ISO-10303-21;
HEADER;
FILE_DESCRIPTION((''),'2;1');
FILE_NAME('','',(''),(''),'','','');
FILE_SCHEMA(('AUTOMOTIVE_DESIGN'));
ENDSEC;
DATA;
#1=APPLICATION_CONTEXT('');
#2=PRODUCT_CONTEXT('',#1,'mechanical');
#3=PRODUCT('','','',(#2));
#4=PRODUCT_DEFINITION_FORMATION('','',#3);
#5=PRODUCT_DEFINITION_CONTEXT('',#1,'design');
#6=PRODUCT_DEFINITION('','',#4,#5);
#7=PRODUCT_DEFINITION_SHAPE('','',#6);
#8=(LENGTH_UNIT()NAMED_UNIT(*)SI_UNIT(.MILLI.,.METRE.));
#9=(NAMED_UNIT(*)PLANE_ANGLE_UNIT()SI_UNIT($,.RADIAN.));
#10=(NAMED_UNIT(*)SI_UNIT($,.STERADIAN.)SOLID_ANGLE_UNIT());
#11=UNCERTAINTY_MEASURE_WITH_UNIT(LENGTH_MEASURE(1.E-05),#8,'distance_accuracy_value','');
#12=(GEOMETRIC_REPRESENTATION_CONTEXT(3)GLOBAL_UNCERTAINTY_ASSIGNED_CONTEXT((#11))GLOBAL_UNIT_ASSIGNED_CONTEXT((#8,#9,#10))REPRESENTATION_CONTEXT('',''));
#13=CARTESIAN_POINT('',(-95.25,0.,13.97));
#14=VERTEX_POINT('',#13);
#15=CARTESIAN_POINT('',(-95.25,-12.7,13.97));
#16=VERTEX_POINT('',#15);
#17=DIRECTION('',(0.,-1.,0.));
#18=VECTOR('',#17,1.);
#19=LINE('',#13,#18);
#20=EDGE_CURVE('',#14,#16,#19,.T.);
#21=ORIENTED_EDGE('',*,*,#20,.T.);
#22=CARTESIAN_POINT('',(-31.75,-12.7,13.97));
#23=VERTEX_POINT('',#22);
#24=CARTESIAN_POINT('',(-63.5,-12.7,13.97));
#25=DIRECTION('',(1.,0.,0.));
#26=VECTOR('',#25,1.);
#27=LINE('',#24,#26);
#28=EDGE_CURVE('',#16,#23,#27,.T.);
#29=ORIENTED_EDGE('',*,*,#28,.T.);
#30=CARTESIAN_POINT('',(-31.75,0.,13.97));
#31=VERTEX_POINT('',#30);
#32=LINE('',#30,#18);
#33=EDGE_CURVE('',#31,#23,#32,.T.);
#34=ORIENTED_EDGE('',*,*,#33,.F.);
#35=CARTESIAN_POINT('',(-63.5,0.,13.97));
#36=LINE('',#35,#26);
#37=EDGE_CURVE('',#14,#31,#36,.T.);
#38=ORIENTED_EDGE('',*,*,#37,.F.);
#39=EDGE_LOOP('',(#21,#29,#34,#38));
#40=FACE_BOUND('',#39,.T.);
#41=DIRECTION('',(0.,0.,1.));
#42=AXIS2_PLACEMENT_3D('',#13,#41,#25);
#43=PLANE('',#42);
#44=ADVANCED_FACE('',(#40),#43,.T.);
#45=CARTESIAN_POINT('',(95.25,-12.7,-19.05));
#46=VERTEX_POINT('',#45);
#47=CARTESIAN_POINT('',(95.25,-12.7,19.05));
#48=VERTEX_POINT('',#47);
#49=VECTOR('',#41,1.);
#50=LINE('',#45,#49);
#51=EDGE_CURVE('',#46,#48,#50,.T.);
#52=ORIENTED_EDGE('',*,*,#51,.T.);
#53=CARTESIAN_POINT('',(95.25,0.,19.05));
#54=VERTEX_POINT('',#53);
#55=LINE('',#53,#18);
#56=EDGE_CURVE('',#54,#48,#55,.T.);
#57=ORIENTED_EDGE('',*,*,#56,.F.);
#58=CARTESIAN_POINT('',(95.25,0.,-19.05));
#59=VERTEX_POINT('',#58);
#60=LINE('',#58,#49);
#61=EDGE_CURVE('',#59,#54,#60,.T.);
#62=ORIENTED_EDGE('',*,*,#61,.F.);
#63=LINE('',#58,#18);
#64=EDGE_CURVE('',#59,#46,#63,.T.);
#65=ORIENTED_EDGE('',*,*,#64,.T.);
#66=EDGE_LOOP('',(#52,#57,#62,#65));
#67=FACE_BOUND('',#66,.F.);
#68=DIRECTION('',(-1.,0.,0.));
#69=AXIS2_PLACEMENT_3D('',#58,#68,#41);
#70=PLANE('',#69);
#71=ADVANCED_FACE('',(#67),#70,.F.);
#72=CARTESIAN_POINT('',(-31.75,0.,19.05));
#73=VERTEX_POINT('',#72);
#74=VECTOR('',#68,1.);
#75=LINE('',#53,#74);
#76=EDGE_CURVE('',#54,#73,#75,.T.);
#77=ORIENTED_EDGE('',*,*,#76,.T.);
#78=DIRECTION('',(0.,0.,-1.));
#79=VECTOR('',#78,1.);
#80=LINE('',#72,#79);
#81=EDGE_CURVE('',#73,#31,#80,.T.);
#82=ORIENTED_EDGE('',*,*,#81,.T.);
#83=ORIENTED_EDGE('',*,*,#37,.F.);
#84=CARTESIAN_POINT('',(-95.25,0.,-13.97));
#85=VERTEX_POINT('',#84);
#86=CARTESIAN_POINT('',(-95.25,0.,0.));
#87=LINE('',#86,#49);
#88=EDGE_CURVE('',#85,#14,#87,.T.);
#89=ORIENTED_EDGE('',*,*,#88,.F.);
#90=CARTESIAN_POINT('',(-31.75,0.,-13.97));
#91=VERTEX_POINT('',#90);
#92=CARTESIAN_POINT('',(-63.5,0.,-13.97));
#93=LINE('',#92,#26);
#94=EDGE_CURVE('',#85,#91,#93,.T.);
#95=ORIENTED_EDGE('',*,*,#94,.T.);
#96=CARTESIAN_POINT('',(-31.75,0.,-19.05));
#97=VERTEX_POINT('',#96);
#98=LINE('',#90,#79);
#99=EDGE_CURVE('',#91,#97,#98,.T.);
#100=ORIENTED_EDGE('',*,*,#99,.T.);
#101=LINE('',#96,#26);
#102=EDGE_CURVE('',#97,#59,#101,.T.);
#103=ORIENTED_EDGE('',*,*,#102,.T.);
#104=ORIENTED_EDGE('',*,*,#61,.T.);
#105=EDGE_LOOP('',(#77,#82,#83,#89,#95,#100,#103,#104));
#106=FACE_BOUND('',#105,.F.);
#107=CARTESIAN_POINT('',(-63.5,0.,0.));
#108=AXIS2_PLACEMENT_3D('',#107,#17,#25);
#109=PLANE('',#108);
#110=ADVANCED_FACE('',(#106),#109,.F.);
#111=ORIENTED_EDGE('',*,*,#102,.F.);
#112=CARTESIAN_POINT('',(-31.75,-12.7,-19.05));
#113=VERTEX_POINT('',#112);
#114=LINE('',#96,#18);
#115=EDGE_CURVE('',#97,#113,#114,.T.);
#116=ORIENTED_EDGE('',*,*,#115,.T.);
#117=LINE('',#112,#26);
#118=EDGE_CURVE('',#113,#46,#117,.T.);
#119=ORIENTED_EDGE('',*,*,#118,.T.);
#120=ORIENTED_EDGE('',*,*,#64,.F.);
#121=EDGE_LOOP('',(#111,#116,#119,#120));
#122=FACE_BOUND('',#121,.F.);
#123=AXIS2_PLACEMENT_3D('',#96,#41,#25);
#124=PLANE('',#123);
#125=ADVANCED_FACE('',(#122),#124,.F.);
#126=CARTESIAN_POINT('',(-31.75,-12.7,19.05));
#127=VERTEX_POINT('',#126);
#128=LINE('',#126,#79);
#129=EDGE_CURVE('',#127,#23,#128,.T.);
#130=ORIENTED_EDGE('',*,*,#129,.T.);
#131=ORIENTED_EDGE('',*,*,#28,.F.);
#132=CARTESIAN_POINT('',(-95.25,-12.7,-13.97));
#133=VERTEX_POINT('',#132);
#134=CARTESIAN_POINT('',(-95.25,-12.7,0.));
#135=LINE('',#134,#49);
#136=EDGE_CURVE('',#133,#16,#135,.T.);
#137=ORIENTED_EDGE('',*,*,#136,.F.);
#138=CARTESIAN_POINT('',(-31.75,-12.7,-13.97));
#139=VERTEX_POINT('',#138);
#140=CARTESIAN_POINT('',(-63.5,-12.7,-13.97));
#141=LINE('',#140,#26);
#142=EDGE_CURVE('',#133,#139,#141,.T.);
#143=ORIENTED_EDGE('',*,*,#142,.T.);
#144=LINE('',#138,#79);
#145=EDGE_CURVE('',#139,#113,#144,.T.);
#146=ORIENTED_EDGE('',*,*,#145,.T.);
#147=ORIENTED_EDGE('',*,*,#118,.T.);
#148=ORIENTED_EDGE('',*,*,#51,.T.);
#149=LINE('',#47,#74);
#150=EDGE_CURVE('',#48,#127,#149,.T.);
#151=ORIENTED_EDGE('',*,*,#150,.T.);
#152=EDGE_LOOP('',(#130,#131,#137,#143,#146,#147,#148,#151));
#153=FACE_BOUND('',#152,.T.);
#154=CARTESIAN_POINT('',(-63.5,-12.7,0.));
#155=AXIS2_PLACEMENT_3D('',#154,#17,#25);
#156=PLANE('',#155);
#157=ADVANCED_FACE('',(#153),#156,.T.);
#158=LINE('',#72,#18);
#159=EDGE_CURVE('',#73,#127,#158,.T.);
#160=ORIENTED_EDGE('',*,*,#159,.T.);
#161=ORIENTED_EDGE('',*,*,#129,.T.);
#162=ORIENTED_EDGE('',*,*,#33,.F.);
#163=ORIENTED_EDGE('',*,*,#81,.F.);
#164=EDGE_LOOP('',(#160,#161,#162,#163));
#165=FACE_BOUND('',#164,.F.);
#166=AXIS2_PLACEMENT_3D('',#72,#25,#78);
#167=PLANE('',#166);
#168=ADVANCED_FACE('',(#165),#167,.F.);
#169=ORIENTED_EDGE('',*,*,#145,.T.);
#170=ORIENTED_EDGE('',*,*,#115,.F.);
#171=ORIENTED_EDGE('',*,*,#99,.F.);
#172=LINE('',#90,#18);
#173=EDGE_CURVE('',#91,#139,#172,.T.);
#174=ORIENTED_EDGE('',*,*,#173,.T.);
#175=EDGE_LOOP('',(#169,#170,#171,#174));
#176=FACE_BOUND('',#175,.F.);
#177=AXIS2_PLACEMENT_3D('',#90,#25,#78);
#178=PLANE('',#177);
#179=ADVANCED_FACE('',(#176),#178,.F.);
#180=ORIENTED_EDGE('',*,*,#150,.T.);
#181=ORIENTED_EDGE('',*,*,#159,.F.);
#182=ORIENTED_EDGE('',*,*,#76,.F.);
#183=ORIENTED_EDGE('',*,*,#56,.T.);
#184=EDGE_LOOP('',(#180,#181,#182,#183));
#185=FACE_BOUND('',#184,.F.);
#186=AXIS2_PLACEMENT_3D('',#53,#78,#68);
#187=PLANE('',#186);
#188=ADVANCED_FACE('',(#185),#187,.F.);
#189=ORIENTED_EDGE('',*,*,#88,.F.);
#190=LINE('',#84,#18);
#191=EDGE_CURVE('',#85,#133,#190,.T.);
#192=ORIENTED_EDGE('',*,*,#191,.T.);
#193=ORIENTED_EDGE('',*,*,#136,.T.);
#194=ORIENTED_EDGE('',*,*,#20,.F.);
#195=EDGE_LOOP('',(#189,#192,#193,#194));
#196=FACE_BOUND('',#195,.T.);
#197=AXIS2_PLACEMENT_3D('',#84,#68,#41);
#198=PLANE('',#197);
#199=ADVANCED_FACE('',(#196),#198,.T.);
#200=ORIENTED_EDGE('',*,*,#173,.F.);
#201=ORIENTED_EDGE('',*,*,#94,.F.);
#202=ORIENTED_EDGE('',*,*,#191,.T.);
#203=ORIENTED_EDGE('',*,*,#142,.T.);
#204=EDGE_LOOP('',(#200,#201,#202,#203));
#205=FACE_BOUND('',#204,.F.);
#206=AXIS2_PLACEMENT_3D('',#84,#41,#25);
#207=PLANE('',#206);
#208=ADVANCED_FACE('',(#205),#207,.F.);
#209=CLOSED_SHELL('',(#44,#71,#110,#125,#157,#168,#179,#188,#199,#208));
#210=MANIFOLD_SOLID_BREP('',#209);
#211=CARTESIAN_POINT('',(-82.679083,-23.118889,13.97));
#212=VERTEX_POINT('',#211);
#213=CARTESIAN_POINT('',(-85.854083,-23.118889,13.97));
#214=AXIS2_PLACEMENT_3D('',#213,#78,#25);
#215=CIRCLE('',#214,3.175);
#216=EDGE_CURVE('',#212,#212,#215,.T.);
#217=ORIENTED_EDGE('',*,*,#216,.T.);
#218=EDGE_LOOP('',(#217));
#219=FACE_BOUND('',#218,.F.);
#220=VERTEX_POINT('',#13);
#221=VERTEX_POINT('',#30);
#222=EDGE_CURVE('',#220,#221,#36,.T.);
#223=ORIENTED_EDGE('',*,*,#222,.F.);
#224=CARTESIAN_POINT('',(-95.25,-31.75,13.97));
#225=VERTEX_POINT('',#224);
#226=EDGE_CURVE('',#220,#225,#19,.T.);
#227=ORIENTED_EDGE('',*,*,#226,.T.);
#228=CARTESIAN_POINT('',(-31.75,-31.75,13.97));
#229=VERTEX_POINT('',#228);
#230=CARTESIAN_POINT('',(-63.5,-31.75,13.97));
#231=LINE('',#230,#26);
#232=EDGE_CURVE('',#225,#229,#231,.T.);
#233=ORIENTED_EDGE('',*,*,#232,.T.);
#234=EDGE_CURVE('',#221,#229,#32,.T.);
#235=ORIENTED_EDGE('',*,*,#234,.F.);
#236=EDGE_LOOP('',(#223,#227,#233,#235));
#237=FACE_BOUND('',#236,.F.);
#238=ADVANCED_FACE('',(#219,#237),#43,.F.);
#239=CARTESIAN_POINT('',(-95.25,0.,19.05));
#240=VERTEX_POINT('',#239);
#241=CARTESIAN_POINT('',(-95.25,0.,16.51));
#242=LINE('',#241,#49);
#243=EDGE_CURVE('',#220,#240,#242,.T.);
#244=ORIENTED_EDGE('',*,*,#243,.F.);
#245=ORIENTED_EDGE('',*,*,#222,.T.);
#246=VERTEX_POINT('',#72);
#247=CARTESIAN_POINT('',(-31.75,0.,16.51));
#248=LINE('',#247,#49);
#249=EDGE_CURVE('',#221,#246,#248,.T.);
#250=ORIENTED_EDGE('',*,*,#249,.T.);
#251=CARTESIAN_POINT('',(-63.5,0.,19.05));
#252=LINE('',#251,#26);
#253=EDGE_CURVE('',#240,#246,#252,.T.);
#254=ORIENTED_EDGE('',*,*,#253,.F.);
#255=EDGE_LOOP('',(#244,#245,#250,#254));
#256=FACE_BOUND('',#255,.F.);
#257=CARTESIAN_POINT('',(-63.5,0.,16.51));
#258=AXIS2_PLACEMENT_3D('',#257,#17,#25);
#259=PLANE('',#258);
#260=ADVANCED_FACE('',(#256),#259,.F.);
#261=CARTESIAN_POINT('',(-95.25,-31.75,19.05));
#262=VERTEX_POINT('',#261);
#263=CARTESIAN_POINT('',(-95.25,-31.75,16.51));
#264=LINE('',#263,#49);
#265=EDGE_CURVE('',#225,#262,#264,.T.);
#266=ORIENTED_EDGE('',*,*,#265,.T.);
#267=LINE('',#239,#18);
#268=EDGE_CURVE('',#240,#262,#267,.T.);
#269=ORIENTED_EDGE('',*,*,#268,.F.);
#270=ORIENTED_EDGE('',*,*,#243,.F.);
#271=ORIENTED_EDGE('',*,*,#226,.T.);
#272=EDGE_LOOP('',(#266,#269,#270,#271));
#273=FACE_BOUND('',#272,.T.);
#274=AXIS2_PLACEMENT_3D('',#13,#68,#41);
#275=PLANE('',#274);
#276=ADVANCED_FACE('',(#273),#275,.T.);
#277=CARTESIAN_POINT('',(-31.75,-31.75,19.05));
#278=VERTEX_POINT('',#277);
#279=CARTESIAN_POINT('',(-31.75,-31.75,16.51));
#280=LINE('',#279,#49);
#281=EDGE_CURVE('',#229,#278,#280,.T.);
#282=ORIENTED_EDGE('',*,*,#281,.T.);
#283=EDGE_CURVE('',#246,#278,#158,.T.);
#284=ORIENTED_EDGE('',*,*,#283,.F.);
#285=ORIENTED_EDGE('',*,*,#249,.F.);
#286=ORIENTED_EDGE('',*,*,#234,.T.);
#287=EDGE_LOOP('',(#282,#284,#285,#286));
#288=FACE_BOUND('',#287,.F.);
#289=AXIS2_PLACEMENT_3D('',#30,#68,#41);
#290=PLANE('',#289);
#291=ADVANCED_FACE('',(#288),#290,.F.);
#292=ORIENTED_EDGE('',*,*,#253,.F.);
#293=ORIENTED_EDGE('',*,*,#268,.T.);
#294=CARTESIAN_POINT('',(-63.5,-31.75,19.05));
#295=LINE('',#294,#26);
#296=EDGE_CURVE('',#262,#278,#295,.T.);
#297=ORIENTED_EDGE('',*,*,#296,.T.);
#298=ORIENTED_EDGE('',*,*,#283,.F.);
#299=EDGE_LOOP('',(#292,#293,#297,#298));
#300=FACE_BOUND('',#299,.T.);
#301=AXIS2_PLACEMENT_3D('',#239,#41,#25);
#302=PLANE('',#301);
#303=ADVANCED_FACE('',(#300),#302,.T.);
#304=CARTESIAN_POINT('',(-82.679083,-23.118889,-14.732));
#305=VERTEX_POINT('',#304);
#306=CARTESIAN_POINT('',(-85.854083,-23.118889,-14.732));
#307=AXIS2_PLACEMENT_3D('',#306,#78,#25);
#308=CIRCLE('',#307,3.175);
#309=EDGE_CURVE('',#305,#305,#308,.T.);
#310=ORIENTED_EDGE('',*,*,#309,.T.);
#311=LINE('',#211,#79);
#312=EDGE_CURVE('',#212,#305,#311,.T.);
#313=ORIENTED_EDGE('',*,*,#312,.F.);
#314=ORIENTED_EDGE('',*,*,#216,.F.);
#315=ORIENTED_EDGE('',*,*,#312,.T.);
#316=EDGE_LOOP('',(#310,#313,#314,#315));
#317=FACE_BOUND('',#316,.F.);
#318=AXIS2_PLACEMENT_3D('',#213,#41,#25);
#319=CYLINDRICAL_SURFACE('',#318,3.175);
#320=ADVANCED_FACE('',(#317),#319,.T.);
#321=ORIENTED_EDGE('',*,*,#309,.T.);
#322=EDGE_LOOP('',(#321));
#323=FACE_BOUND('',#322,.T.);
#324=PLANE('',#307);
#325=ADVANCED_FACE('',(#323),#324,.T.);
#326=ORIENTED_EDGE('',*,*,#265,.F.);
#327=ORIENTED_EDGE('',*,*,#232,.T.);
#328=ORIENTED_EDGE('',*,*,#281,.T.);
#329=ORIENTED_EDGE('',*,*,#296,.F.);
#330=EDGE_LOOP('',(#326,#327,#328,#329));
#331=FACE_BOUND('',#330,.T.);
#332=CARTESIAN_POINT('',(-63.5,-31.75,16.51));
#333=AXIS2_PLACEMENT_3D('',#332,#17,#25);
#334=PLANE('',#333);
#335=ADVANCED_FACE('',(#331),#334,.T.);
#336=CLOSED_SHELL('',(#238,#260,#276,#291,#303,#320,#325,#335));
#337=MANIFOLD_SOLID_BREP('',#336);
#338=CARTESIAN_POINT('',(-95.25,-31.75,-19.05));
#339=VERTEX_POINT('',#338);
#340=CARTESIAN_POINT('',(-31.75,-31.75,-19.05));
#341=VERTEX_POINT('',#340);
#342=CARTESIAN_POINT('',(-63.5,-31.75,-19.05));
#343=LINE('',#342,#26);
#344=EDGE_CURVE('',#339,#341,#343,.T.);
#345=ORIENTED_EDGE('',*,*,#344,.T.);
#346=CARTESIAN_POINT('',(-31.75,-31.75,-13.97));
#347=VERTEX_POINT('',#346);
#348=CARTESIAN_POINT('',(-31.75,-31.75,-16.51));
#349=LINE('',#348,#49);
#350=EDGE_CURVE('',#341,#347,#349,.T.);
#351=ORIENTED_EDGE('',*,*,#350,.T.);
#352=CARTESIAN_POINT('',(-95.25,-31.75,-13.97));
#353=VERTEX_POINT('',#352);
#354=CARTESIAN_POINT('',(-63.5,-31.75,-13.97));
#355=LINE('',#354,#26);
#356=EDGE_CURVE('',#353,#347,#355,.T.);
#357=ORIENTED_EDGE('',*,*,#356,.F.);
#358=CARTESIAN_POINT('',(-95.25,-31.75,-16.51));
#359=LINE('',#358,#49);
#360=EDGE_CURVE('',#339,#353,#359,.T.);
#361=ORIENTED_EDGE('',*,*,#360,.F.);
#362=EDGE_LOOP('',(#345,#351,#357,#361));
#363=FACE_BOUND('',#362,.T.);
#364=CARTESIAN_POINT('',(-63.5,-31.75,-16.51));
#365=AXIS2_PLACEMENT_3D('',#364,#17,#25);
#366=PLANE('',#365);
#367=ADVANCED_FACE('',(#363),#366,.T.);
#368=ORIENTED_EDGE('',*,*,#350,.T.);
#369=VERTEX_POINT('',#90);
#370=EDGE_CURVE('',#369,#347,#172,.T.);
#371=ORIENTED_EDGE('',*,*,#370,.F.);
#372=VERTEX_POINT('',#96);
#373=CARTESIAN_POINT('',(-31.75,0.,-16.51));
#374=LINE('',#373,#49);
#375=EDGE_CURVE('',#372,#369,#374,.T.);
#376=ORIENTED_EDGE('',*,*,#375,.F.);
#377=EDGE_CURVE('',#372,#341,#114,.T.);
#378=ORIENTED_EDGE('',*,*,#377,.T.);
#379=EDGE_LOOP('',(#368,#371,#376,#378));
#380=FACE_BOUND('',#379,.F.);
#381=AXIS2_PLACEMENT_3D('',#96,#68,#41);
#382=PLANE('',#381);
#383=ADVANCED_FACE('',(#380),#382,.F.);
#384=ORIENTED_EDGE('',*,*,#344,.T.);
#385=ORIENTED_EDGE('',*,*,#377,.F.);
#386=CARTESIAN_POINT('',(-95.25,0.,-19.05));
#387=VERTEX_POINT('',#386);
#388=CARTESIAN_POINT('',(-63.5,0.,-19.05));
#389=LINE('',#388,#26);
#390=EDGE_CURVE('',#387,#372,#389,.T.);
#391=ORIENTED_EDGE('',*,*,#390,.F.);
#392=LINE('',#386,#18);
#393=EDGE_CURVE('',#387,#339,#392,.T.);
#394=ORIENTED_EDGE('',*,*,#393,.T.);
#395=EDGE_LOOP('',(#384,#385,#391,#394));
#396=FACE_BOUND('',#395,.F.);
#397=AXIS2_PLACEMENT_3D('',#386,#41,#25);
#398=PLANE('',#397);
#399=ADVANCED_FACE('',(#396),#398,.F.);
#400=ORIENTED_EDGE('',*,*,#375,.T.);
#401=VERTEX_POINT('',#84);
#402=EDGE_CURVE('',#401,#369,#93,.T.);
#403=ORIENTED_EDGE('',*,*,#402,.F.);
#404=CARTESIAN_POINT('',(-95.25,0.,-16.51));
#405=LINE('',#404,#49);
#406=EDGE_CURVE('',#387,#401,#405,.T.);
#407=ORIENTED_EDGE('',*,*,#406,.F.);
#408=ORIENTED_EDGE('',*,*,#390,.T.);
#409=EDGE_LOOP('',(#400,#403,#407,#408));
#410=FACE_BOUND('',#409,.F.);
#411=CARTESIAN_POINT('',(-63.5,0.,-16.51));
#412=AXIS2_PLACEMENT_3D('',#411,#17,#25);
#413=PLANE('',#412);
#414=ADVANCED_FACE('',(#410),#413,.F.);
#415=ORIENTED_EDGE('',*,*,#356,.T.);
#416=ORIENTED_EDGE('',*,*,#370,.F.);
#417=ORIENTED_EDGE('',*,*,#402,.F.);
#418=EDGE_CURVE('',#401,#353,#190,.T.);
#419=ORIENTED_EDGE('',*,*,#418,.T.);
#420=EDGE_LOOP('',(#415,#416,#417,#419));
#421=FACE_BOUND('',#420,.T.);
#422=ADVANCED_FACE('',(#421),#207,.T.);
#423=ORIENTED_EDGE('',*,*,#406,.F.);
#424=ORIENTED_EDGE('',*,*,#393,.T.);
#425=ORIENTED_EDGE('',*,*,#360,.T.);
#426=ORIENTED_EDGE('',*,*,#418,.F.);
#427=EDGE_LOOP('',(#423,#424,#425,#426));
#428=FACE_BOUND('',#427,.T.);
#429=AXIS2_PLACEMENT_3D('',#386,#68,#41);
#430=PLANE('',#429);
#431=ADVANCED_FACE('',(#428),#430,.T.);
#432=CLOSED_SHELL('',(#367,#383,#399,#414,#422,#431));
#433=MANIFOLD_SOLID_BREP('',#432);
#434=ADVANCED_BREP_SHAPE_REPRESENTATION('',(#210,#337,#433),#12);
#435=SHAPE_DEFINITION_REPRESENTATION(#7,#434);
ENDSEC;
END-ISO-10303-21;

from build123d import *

# Parameters (mm, degrees)
F0_W     = 63.5
F0_H     = 5.08
F1_DEPTH = 31.75
F0_H_2   = 27.94
F2_DEPTH = 12.7
F3_R     = 3.175
F4_DEPTH = 28.702


with BuildPart() as f1:
    # F0 (on Front) → F1 (new body)
    with BuildSketch(Plane.XZ):
        with Locations((-63.5, 16.51)):
            Rectangle(F0_W, F0_H)
    extrude(amount=F1_DEPTH)

    # F3 (on face) → F4 (join)
    with BuildSketch(Plane(origin=(0, 0, 13.97), x_dir=(1, 0, 0), z_dir=(0, 0, -1))):
        with Locations((-85.8540832996, 23.1188889593)):
            Circle(F3_R)
    extrude(amount=F4_DEPTH)


with BuildPart() as f1b:
    # F0 (on Front) → F1, piece 2 (new body)
    with BuildSketch(Plane.XZ):
        with Locations((-63.5, -16.51)):
            Rectangle(F0_W, F0_H)
    extrude(amount=F1_DEPTH)


with BuildPart() as f2:
    # F0 (on Front) → F2 (new body)
    with BuildSketch(Plane.XZ):
        with Locations((-63.5, 0)):
            Rectangle(F0_W, F0_H_2)
        Polygon((95.25, -19.05), (95.25, 19.05), (-31.75, 19.05), (-31.75, 13.97), (-31.75, -13.97), (-31.75, -19.05), align=None)
    extrude(amount=F2_DEPTH)


solid = Compound([f1.part, f1b.part, f2.part])
